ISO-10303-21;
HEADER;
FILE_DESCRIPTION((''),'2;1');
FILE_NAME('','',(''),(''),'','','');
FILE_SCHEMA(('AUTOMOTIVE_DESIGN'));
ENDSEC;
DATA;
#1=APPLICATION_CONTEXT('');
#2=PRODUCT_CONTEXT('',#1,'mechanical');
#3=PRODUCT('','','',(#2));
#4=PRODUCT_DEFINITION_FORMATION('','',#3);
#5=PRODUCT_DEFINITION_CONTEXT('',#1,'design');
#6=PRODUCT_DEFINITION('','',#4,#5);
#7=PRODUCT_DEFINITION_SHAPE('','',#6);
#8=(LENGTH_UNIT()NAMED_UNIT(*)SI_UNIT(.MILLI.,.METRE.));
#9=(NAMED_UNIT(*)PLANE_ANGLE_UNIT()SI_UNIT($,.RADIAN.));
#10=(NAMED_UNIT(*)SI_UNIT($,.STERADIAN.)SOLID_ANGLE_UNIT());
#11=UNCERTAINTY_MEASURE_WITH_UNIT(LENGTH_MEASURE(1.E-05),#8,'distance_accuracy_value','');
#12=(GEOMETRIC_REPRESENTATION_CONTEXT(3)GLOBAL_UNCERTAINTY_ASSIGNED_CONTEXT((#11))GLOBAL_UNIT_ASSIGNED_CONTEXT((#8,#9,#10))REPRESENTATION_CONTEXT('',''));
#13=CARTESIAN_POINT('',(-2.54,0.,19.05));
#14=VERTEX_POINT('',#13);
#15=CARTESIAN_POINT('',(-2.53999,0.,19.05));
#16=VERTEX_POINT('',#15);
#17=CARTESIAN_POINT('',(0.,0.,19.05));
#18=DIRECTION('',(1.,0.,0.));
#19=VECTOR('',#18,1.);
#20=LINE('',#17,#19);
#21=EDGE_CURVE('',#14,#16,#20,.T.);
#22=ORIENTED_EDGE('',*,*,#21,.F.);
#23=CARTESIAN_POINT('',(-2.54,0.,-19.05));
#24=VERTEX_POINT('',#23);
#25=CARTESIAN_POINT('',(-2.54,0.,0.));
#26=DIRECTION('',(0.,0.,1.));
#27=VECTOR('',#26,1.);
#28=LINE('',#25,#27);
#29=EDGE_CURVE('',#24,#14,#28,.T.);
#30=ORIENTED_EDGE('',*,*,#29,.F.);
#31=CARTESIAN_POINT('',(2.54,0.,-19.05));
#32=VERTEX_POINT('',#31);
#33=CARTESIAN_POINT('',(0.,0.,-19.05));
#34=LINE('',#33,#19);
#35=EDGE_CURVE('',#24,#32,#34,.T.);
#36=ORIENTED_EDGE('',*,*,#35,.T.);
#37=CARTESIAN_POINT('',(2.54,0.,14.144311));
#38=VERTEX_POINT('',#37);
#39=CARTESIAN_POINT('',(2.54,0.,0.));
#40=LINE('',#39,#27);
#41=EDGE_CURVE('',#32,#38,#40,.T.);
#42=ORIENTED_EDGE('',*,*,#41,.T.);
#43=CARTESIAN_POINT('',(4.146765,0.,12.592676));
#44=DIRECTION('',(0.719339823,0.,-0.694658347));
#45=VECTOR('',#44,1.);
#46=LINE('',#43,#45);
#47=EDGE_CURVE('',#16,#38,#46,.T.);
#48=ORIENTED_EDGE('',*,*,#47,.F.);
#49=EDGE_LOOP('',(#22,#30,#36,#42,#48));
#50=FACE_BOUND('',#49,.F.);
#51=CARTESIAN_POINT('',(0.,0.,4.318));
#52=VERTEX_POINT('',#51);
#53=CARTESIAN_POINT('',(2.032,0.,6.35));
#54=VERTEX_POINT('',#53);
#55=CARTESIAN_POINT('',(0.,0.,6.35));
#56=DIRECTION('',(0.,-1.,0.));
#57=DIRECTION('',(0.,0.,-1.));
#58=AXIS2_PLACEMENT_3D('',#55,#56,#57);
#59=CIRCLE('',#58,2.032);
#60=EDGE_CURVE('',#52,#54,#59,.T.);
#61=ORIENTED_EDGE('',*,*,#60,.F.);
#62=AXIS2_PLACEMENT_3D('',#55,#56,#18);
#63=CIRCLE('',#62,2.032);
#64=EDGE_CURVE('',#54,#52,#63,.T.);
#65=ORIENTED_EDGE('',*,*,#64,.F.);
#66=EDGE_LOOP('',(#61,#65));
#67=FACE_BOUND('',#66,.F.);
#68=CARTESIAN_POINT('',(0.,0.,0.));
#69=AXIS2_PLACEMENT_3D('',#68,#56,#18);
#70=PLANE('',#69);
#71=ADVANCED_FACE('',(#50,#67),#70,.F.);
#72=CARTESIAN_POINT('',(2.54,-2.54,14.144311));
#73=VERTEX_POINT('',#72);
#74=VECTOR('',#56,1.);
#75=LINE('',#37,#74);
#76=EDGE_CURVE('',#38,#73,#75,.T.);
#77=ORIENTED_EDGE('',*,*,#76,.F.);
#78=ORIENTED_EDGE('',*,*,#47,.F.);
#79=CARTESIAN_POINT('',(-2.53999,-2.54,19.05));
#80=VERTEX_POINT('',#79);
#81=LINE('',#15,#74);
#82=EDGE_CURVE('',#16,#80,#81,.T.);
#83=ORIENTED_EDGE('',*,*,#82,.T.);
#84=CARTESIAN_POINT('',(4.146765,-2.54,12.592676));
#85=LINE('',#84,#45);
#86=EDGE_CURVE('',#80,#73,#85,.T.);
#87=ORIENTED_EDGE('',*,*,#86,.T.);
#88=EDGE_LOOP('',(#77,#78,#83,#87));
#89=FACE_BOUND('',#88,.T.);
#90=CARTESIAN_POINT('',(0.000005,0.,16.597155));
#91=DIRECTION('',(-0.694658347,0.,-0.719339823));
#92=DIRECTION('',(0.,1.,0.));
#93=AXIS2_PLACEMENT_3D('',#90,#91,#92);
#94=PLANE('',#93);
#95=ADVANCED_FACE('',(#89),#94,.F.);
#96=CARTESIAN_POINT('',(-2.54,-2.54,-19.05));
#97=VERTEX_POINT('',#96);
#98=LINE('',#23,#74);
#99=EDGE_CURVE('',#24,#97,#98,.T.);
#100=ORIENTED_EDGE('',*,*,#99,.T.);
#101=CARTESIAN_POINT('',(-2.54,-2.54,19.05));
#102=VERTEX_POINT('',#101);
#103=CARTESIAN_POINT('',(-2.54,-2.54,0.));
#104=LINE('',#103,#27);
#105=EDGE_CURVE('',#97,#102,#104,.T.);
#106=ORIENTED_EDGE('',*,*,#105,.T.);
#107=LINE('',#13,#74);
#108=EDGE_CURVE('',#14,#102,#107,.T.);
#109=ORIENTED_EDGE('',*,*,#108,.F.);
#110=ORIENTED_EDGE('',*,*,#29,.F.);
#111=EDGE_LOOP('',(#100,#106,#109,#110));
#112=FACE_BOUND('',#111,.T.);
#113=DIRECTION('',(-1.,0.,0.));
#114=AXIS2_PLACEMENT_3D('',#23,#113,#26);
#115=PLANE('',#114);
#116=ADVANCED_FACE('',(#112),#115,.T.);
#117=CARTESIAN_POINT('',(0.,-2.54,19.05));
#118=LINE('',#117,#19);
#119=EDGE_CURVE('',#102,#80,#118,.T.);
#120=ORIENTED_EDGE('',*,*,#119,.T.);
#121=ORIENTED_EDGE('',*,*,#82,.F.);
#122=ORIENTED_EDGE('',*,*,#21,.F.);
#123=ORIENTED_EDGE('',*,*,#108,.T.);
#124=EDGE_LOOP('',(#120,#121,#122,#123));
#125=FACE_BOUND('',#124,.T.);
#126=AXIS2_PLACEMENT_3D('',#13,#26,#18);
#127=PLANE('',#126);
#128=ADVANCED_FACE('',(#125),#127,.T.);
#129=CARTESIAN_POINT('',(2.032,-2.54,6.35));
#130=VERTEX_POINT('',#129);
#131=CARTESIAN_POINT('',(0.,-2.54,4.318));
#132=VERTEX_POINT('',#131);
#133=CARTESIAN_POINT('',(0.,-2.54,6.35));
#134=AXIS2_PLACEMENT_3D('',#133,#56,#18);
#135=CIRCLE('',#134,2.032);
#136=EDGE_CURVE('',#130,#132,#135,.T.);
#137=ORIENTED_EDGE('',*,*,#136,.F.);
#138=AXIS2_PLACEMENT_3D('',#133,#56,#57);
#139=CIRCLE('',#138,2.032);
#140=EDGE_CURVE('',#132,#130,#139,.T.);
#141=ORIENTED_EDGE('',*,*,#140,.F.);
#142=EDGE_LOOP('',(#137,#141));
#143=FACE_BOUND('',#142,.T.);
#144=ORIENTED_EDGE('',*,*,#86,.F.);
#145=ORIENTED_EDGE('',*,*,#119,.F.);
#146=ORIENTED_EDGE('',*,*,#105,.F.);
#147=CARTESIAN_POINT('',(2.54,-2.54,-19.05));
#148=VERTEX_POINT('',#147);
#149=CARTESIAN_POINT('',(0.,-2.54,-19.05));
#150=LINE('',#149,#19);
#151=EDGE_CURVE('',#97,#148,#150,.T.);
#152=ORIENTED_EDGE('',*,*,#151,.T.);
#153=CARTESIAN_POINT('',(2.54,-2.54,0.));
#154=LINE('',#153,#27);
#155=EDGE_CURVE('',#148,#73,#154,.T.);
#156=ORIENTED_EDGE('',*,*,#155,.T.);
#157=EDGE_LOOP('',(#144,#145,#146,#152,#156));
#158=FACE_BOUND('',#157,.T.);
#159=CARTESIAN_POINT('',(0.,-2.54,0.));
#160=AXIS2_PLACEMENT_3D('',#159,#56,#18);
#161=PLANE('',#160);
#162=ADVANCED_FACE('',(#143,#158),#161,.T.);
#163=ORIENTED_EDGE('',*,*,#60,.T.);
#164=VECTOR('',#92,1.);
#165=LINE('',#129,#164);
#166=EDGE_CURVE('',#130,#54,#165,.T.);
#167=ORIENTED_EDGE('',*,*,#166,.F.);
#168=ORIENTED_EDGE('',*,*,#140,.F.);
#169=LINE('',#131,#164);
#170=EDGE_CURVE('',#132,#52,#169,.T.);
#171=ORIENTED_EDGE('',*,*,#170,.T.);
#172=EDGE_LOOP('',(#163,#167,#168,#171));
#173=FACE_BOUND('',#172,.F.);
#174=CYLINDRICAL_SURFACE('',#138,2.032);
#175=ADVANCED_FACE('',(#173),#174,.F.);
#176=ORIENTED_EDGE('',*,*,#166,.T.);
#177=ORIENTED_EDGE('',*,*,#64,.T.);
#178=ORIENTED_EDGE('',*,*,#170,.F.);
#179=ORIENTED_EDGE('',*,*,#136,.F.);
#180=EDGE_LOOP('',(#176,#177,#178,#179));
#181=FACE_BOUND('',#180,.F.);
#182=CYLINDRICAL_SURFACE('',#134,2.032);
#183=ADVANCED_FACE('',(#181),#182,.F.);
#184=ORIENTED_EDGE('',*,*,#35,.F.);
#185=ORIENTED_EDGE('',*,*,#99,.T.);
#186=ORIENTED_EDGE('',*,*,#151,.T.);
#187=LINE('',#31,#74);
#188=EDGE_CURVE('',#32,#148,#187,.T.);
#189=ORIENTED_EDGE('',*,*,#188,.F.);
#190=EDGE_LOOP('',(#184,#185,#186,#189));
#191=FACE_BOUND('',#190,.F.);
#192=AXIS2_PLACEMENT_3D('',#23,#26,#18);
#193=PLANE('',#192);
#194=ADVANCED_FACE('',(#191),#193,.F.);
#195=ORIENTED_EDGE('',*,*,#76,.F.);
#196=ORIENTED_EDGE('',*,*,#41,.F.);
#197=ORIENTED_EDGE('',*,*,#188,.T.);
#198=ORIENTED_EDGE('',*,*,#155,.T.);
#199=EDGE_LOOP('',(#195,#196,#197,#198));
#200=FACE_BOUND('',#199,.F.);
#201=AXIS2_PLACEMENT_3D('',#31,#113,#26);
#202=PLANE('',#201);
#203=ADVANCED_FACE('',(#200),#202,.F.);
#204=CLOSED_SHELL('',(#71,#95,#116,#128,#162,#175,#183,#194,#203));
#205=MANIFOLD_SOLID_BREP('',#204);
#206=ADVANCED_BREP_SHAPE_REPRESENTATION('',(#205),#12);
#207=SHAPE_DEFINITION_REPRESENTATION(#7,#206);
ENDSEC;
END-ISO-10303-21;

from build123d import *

# Parameters (mm, degrees)
F0_W     = 5.08
F0_H     = 38.1
F1_DEPTH = 2.54
F2_SIZE2 = 4.905689
F2_SIZE  = 5.07999
F4_DEPTH = 25.4


# Not quite as in the source:
# - a fillet or chamfer is up to 0.001 mm smaller than in the source, because OpenCascade refuses the exact size


with BuildPart() as f1:
    # F0 (on Front) → F1 (new body)
    with BuildSketch(Plane.XZ):
        Rectangle(F0_W, F0_H)
    extrude(amount=F1_DEPTH)

    # F2 (size 5.08 and 4.905698976 in the source; OpenCascade refuses exactly that, so slightly less here)
    f2_edges = [f1.edges().sort_by_distance(p)[0] for p in [
        (2.54, -1.27, 19.05),
    ]]
    f2_side = f1.faces().sort_by_distance((0, -1.27, 19.05))[0]
    chamfer(f2_edges, length=F2_SIZE, length2=F2_SIZE2, reference=f2_side)

    # F3 (on face) → F4 (cut)
    with BuildSketch(Plane.XZ.offset(2.54)):
        with BuildLine():
            ThreePointArc((0, 4.318), (1.4368409794, 4.9131590206), (2.032, 6.35))
            ThreePointArc((2.032, 6.35), (-1.4368409794, 7.7868409794), (0, 4.318))
        make_face()
    extrude(amount=-F4_DEPTH, mode=Mode.SUBTRACT)


solid = f1.part
